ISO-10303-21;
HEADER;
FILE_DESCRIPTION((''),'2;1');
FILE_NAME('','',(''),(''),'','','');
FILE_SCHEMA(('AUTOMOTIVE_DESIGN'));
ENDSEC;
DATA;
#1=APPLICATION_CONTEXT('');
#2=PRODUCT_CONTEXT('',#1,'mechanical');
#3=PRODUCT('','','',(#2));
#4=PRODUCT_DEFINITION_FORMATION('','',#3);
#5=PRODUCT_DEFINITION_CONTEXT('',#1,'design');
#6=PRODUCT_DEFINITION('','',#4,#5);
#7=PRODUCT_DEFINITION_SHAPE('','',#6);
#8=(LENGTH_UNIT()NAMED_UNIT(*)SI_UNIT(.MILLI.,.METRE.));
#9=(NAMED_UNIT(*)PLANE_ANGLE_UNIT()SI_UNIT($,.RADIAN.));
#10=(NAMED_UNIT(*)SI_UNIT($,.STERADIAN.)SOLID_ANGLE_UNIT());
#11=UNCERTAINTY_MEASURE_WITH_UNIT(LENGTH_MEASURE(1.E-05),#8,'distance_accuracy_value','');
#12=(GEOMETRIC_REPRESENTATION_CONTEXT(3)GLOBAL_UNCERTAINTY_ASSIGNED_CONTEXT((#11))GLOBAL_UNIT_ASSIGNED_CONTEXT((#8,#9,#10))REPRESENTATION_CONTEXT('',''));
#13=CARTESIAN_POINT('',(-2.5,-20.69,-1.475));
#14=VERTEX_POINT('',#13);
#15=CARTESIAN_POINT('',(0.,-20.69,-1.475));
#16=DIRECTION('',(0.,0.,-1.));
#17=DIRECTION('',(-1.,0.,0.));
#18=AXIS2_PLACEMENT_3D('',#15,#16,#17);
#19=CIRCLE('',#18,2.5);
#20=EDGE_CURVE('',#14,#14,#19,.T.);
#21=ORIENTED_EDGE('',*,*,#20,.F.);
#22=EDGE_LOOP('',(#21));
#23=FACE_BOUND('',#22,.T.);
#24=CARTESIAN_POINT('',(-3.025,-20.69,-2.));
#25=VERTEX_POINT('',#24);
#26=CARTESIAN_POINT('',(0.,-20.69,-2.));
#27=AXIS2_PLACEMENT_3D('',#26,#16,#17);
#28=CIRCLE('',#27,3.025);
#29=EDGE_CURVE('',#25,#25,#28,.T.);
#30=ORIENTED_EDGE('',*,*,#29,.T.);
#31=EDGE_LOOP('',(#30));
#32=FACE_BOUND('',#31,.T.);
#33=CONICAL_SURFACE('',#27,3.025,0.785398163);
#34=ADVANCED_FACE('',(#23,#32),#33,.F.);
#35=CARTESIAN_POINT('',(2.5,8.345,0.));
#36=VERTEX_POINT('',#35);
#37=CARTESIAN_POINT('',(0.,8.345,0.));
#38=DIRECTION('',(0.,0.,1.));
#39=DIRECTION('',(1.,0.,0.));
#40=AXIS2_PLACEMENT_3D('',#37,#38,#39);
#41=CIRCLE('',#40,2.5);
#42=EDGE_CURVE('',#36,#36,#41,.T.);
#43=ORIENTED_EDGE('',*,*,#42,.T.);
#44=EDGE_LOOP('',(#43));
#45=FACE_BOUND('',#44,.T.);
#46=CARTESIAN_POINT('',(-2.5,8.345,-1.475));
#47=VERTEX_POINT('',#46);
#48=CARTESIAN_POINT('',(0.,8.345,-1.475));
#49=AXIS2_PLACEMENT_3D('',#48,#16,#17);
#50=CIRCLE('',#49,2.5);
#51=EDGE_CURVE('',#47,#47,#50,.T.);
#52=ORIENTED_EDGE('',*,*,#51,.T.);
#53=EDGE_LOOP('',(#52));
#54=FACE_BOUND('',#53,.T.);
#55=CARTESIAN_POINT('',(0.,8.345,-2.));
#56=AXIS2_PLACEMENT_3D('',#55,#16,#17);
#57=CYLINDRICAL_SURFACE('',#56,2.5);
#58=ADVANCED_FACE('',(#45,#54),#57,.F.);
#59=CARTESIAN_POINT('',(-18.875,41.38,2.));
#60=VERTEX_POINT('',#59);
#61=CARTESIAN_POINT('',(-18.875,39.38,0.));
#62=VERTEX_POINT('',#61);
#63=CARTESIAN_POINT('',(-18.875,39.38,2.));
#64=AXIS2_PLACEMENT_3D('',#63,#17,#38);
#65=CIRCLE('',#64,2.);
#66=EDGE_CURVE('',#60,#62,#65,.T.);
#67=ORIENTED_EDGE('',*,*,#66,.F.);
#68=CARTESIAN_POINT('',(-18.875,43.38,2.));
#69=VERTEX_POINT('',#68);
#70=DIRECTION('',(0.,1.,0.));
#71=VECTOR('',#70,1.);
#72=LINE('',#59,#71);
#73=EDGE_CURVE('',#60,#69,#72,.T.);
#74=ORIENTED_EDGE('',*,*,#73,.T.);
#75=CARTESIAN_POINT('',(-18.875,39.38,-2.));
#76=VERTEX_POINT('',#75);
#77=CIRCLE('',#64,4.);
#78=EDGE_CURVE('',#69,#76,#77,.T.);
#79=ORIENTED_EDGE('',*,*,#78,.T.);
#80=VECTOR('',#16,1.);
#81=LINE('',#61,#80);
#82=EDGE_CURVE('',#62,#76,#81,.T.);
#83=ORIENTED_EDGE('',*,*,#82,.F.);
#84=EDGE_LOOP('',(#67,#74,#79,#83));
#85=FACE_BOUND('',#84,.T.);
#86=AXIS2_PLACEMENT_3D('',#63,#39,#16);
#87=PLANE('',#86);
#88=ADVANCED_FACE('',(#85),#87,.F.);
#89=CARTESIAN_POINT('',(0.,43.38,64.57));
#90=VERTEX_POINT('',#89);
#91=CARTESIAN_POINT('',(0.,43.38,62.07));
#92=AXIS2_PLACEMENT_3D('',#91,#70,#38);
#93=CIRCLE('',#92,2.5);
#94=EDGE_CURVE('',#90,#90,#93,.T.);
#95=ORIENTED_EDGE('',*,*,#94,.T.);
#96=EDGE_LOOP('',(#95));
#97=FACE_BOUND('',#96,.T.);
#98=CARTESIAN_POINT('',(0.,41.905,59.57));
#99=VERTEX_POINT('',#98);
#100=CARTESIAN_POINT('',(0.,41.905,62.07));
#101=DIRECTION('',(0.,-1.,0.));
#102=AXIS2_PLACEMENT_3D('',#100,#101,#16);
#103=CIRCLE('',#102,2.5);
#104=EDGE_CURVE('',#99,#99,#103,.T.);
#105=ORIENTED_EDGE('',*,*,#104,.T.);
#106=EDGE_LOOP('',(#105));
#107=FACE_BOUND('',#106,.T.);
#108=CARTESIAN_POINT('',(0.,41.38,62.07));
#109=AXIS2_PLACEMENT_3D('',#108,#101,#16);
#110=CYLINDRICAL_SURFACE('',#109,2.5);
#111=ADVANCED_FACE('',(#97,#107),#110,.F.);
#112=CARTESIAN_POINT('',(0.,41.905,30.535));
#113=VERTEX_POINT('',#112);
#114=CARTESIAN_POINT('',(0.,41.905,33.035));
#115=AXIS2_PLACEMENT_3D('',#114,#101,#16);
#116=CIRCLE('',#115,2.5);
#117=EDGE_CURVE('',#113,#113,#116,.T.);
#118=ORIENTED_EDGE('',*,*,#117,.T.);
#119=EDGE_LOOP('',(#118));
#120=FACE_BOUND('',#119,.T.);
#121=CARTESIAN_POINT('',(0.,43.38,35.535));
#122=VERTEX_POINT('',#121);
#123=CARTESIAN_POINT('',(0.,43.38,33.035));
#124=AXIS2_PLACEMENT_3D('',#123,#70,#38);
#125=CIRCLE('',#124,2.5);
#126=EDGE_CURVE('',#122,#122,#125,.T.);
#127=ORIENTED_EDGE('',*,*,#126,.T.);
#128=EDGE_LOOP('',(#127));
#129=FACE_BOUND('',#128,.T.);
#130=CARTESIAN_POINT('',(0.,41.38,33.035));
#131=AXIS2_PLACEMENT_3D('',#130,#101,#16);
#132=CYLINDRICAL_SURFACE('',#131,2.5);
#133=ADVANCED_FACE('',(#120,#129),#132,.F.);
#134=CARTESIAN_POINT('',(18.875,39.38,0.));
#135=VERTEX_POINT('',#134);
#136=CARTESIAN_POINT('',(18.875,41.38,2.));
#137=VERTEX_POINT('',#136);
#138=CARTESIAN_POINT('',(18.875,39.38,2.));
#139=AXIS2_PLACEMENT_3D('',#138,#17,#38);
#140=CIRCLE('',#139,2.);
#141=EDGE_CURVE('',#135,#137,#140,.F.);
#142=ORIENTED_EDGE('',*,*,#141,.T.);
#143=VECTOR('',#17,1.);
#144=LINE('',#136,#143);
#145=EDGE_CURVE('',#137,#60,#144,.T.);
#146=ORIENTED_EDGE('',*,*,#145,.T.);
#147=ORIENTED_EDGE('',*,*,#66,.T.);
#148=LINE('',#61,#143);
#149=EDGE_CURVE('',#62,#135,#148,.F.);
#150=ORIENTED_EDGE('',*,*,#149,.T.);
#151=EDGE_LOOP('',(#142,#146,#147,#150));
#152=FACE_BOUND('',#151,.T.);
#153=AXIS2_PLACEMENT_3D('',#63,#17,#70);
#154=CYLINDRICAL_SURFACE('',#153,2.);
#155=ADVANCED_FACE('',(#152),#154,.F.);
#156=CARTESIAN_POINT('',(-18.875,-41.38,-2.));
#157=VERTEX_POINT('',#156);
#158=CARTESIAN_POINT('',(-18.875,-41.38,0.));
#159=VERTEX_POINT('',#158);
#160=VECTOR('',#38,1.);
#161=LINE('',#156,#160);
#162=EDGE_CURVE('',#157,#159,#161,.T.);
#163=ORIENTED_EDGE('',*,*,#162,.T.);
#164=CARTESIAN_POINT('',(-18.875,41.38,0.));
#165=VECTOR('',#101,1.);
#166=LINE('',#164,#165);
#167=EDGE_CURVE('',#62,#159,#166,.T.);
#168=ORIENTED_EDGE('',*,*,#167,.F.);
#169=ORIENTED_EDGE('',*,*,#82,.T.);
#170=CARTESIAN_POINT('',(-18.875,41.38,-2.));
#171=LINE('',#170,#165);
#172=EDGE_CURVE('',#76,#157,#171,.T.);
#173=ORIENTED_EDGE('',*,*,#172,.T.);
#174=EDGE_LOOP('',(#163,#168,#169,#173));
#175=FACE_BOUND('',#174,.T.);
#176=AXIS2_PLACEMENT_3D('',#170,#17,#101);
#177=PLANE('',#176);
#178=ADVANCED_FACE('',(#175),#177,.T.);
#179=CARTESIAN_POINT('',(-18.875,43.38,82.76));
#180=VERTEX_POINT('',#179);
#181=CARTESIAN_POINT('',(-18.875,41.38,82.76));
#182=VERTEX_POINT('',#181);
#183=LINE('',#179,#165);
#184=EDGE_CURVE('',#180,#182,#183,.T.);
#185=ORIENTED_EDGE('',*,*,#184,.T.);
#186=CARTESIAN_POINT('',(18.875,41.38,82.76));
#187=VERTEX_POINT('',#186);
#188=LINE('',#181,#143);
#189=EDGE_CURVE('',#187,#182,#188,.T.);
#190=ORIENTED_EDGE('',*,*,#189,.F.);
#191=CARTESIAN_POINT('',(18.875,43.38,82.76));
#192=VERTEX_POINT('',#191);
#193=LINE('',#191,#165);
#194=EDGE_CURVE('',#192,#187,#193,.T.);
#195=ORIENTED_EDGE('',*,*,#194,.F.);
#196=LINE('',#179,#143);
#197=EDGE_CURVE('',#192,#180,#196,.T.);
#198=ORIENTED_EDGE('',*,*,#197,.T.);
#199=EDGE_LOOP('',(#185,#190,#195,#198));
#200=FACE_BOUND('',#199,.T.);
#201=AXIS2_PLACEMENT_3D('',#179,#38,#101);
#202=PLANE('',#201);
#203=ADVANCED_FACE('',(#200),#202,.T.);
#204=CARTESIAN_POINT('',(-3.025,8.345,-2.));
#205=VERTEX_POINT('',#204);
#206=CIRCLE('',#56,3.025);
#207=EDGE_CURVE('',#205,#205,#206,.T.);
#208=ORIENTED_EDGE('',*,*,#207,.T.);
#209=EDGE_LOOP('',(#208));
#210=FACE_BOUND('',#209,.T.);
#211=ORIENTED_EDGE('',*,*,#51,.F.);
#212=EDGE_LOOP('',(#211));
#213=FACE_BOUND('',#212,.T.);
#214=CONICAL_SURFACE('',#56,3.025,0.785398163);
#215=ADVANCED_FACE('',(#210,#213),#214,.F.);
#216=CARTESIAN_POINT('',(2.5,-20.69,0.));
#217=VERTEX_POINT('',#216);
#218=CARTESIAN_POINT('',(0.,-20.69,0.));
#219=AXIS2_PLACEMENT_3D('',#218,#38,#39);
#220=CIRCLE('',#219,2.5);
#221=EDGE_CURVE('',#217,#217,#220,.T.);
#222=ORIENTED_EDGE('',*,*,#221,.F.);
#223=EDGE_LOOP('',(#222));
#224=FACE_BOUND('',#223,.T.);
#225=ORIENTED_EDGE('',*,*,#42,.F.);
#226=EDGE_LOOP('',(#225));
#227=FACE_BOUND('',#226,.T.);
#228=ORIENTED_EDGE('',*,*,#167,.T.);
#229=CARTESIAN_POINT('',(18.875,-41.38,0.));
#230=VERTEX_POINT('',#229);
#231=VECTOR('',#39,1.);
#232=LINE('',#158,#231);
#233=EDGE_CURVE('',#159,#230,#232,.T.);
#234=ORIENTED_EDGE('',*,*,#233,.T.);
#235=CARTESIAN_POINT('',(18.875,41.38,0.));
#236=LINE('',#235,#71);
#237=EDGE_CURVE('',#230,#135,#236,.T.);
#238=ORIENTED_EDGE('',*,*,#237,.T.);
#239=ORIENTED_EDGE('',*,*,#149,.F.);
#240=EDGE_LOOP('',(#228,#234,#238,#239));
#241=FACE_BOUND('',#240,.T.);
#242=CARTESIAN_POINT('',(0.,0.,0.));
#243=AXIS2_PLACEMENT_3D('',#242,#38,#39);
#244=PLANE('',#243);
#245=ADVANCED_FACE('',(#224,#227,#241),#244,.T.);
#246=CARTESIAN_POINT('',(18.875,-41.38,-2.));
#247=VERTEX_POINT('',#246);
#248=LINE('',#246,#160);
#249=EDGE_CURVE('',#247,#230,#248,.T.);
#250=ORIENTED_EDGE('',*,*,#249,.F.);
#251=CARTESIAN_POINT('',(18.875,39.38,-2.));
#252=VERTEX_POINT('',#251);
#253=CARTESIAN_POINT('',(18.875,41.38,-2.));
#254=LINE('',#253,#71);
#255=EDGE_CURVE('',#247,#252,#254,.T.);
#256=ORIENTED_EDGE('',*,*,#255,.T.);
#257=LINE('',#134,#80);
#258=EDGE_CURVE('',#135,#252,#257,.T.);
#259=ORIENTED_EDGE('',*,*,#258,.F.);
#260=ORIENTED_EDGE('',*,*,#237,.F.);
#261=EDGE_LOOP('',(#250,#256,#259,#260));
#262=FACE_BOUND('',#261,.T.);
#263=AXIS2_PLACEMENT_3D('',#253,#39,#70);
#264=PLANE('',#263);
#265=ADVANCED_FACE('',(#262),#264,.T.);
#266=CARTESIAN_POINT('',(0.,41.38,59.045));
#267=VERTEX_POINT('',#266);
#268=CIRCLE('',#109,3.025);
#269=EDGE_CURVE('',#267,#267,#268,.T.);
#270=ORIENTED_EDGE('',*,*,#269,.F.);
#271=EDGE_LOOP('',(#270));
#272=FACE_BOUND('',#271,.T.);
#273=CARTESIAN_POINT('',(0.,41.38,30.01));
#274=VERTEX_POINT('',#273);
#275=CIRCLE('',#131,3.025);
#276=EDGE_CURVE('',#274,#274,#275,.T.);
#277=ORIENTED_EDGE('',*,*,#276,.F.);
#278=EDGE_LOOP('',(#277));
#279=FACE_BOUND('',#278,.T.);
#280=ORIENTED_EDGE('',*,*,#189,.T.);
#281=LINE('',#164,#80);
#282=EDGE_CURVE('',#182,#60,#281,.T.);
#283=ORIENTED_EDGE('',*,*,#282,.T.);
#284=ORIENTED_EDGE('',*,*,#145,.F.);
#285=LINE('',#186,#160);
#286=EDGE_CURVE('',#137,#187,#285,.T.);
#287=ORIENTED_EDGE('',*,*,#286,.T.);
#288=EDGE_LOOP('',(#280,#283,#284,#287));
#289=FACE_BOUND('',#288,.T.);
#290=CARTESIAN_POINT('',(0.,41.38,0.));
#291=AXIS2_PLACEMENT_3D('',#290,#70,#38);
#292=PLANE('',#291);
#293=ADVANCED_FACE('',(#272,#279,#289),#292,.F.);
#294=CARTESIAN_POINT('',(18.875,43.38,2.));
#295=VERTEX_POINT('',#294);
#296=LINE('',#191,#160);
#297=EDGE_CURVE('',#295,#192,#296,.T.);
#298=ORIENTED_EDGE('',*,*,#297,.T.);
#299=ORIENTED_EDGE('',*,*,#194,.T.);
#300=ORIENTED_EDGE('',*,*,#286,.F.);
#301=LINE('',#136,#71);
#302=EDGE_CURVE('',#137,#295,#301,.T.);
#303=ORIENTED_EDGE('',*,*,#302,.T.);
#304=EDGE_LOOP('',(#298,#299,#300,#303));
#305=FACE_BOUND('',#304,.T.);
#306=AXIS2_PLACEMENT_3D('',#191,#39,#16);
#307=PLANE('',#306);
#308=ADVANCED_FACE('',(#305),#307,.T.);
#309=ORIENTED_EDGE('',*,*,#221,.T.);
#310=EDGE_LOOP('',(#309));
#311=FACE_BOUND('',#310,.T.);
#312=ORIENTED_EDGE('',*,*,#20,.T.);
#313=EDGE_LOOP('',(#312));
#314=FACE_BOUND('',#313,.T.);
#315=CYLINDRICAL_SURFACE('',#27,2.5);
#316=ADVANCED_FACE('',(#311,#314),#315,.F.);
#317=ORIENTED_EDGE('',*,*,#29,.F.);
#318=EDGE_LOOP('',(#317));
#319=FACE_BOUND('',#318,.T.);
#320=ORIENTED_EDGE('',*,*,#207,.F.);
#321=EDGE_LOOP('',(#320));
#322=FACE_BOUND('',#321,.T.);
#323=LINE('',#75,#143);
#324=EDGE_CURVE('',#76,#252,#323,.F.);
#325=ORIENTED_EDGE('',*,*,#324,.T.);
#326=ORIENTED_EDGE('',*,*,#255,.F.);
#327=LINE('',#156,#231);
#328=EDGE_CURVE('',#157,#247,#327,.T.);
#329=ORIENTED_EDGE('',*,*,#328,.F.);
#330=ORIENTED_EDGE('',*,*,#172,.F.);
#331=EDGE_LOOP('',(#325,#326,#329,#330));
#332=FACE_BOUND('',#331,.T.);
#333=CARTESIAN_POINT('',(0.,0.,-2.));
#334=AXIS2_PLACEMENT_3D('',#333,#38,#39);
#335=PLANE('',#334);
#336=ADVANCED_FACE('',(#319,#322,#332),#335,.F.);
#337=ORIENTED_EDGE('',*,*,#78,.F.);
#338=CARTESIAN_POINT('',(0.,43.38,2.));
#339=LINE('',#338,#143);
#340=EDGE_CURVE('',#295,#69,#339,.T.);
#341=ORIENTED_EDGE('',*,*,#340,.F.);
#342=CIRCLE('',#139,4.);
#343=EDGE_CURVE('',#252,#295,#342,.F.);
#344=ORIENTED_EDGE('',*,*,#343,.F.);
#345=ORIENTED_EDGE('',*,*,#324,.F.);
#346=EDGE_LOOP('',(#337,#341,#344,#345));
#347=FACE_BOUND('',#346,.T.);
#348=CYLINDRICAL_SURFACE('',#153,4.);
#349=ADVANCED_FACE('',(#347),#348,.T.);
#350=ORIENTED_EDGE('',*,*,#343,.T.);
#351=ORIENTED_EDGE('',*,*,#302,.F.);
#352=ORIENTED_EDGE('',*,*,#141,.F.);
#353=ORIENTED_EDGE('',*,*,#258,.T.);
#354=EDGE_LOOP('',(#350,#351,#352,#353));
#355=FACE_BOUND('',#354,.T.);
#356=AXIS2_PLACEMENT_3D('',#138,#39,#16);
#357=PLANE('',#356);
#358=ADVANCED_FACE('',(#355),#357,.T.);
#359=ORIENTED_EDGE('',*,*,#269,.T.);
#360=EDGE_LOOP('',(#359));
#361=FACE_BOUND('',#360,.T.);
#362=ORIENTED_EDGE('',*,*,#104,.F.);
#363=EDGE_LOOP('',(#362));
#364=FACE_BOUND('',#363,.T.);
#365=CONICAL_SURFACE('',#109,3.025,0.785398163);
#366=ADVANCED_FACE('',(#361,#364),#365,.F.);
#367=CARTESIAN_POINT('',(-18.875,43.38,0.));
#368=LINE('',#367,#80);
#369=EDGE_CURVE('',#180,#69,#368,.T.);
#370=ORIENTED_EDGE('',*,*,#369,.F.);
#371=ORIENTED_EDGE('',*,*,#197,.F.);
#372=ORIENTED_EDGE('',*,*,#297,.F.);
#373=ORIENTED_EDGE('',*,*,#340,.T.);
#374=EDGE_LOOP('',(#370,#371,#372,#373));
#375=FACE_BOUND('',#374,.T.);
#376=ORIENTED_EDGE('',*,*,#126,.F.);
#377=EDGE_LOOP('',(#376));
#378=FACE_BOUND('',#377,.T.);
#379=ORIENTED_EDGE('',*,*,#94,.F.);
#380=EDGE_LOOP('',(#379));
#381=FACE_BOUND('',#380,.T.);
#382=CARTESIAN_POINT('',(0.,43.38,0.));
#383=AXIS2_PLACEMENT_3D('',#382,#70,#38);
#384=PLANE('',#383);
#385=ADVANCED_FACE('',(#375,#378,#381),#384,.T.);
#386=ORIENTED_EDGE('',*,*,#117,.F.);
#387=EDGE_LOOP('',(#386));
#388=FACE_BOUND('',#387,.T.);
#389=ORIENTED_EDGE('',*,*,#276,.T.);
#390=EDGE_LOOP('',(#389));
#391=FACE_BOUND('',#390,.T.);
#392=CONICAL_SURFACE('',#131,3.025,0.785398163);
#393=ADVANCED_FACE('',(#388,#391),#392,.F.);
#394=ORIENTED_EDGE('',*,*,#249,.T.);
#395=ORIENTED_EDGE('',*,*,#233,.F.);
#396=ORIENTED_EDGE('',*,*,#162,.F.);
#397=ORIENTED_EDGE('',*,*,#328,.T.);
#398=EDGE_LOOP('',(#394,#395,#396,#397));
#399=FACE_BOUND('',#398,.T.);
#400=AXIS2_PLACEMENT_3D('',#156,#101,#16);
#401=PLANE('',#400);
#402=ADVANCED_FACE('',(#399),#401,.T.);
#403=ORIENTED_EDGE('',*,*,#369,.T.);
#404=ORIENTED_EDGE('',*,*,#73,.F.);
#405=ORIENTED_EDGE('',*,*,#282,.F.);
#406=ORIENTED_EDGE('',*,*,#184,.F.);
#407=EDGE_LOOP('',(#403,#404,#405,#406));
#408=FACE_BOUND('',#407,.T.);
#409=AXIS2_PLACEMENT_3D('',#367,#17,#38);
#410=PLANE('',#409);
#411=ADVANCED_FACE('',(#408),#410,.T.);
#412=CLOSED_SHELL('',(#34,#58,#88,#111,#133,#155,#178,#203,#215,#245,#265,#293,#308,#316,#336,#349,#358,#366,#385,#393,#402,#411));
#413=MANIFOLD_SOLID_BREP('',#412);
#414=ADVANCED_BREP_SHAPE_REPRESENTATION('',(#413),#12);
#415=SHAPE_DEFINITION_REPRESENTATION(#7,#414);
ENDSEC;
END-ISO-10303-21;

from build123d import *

# Parameters (mm, degrees)
SKETCH1_W                       = 37.75
SKETCH1_H                       = 82.76
BASE_FLANGE1_DEPTH              = 2
EDGE_FLANGE1_STRIP_W            = 12
EDGE_FLANGE1_STRIP_H            = 2
EDGE_FLANGE1_STRIP_CUT_DEPTH    = 37.75
EDGE_FLANGE1_DEPTH              = 37.75
M6X1_0_TAPPED_HOLE2_D           = 5
M6X1_0_TAPPED_HOLE2_DEPTH       = 15
M6X1_0_TAPPED_HOLE2_CSINK_D     = 6.05
M6X1_0_TAPPED_HOLE2_CSINK_ANGLE = 90
M6X1_0_TAPPED_HOLE2_TIP         = 1.502151548
M6X1_0_TAPPED_HOLE3_D           = 5
M6X1_0_TAPPED_HOLE3_DEPTH       = 15
M6X1_0_TAPPED_HOLE3_CSINK_D     = 6.05
M6X1_0_TAPPED_HOLE3_CSINK_ANGLE = 90
M6X1_0_TAPPED_HOLE3_TIP         = 1.502151548


# Sheet-metal steps are written as plain solids
with BuildPart() as part:
    # Sketch1 → Base-Flange1 (new body)
    with BuildSketch(Plane.XY):
        Rectangle(SKETCH1_W, SKETCH1_H)
    extrude(amount=-BASE_FLANGE1_DEPTH)

    # Edge-Flange1 strip (across the edge) → Edge-Flange1 strip cut (cut)
    with BuildSketch(Plane(origin=(18.875, 41.38, 0), x_dir=(0, -1, 0), z_dir=(-1, 0, 0))):
        with Locations((-4, -1)):
            Rectangle(EDGE_FLANGE1_STRIP_W, EDGE_FLANGE1_STRIP_H)
    extrude(amount=EDGE_FLANGE1_STRIP_CUT_DEPTH, mode=Mode.SUBTRACT)

    # Edge-Flange1 section (across the edge) → Edge-Flange1 (add)
    with BuildSketch(Plane(origin=(18.875, 41.38, 0), x_dir=(0, -1, 0), z_dir=(-1, 0, 0))):
        with BuildLine():
            Line((-2, 2), (-2, 82.76))
            Line((-2, 82.76), (0, 82.76))
            Line((0, 82.76), (0, 2))
            ThreePointArc((0, 2), (0.585786438, 0.585786438), (2, 0))
            Line((2, 0), (2, -2))
            ThreePointArc((2, -2), (-0.828427125, -0.828427125), (-2, 2))
        make_face()
    extrude(amount=EDGE_FLANGE1_DEPTH)

    # M6x1.0 Tapped Hole2
    with Locations(Plane(origin=(0, 0, -2), x_dir=(-1, 0, 0), z_dir=(0, 0, -1))):
        with Locations((0, 8.345), (0, -20.69)):
            CounterSinkHole(M6X1_0_TAPPED_HOLE2_D / 2, M6X1_0_TAPPED_HOLE2_CSINK_D / 2, depth=M6X1_0_TAPPED_HOLE2_DEPTH, counter_sink_angle=M6X1_0_TAPPED_HOLE2_CSINK_ANGLE)
            with Locations((0, 0, -(M6X1_0_TAPPED_HOLE2_DEPTH + M6X1_0_TAPPED_HOLE2_TIP / 2))):  # 118° drill point
                Cone(0, M6X1_0_TAPPED_HOLE2_D / 2, M6X1_0_TAPPED_HOLE2_TIP, mode=Mode.SUBTRACT)

    # M6x1.0 Tapped Hole3
    with Locations(Plane(origin=(0, 41.38, 0), x_dir=(-1, 0, 0), z_dir=(0, -1, 0))):
        with Locations((0, -33.035), (0, -62.07)):
            CounterSinkHole(M6X1_0_TAPPED_HOLE3_D / 2, M6X1_0_TAPPED_HOLE3_CSINK_D / 2, depth=M6X1_0_TAPPED_HOLE3_DEPTH, counter_sink_angle=M6X1_0_TAPPED_HOLE3_CSINK_ANGLE)
            with Locations((0, 0, -(M6X1_0_TAPPED_HOLE3_DEPTH + M6X1_0_TAPPED_HOLE3_TIP / 2))):  # 118° drill point
                Cone(0, M6X1_0_TAPPED_HOLE3_D / 2, M6X1_0_TAPPED_HOLE3_TIP, mode=Mode.SUBTRACT)


solid = part.part
